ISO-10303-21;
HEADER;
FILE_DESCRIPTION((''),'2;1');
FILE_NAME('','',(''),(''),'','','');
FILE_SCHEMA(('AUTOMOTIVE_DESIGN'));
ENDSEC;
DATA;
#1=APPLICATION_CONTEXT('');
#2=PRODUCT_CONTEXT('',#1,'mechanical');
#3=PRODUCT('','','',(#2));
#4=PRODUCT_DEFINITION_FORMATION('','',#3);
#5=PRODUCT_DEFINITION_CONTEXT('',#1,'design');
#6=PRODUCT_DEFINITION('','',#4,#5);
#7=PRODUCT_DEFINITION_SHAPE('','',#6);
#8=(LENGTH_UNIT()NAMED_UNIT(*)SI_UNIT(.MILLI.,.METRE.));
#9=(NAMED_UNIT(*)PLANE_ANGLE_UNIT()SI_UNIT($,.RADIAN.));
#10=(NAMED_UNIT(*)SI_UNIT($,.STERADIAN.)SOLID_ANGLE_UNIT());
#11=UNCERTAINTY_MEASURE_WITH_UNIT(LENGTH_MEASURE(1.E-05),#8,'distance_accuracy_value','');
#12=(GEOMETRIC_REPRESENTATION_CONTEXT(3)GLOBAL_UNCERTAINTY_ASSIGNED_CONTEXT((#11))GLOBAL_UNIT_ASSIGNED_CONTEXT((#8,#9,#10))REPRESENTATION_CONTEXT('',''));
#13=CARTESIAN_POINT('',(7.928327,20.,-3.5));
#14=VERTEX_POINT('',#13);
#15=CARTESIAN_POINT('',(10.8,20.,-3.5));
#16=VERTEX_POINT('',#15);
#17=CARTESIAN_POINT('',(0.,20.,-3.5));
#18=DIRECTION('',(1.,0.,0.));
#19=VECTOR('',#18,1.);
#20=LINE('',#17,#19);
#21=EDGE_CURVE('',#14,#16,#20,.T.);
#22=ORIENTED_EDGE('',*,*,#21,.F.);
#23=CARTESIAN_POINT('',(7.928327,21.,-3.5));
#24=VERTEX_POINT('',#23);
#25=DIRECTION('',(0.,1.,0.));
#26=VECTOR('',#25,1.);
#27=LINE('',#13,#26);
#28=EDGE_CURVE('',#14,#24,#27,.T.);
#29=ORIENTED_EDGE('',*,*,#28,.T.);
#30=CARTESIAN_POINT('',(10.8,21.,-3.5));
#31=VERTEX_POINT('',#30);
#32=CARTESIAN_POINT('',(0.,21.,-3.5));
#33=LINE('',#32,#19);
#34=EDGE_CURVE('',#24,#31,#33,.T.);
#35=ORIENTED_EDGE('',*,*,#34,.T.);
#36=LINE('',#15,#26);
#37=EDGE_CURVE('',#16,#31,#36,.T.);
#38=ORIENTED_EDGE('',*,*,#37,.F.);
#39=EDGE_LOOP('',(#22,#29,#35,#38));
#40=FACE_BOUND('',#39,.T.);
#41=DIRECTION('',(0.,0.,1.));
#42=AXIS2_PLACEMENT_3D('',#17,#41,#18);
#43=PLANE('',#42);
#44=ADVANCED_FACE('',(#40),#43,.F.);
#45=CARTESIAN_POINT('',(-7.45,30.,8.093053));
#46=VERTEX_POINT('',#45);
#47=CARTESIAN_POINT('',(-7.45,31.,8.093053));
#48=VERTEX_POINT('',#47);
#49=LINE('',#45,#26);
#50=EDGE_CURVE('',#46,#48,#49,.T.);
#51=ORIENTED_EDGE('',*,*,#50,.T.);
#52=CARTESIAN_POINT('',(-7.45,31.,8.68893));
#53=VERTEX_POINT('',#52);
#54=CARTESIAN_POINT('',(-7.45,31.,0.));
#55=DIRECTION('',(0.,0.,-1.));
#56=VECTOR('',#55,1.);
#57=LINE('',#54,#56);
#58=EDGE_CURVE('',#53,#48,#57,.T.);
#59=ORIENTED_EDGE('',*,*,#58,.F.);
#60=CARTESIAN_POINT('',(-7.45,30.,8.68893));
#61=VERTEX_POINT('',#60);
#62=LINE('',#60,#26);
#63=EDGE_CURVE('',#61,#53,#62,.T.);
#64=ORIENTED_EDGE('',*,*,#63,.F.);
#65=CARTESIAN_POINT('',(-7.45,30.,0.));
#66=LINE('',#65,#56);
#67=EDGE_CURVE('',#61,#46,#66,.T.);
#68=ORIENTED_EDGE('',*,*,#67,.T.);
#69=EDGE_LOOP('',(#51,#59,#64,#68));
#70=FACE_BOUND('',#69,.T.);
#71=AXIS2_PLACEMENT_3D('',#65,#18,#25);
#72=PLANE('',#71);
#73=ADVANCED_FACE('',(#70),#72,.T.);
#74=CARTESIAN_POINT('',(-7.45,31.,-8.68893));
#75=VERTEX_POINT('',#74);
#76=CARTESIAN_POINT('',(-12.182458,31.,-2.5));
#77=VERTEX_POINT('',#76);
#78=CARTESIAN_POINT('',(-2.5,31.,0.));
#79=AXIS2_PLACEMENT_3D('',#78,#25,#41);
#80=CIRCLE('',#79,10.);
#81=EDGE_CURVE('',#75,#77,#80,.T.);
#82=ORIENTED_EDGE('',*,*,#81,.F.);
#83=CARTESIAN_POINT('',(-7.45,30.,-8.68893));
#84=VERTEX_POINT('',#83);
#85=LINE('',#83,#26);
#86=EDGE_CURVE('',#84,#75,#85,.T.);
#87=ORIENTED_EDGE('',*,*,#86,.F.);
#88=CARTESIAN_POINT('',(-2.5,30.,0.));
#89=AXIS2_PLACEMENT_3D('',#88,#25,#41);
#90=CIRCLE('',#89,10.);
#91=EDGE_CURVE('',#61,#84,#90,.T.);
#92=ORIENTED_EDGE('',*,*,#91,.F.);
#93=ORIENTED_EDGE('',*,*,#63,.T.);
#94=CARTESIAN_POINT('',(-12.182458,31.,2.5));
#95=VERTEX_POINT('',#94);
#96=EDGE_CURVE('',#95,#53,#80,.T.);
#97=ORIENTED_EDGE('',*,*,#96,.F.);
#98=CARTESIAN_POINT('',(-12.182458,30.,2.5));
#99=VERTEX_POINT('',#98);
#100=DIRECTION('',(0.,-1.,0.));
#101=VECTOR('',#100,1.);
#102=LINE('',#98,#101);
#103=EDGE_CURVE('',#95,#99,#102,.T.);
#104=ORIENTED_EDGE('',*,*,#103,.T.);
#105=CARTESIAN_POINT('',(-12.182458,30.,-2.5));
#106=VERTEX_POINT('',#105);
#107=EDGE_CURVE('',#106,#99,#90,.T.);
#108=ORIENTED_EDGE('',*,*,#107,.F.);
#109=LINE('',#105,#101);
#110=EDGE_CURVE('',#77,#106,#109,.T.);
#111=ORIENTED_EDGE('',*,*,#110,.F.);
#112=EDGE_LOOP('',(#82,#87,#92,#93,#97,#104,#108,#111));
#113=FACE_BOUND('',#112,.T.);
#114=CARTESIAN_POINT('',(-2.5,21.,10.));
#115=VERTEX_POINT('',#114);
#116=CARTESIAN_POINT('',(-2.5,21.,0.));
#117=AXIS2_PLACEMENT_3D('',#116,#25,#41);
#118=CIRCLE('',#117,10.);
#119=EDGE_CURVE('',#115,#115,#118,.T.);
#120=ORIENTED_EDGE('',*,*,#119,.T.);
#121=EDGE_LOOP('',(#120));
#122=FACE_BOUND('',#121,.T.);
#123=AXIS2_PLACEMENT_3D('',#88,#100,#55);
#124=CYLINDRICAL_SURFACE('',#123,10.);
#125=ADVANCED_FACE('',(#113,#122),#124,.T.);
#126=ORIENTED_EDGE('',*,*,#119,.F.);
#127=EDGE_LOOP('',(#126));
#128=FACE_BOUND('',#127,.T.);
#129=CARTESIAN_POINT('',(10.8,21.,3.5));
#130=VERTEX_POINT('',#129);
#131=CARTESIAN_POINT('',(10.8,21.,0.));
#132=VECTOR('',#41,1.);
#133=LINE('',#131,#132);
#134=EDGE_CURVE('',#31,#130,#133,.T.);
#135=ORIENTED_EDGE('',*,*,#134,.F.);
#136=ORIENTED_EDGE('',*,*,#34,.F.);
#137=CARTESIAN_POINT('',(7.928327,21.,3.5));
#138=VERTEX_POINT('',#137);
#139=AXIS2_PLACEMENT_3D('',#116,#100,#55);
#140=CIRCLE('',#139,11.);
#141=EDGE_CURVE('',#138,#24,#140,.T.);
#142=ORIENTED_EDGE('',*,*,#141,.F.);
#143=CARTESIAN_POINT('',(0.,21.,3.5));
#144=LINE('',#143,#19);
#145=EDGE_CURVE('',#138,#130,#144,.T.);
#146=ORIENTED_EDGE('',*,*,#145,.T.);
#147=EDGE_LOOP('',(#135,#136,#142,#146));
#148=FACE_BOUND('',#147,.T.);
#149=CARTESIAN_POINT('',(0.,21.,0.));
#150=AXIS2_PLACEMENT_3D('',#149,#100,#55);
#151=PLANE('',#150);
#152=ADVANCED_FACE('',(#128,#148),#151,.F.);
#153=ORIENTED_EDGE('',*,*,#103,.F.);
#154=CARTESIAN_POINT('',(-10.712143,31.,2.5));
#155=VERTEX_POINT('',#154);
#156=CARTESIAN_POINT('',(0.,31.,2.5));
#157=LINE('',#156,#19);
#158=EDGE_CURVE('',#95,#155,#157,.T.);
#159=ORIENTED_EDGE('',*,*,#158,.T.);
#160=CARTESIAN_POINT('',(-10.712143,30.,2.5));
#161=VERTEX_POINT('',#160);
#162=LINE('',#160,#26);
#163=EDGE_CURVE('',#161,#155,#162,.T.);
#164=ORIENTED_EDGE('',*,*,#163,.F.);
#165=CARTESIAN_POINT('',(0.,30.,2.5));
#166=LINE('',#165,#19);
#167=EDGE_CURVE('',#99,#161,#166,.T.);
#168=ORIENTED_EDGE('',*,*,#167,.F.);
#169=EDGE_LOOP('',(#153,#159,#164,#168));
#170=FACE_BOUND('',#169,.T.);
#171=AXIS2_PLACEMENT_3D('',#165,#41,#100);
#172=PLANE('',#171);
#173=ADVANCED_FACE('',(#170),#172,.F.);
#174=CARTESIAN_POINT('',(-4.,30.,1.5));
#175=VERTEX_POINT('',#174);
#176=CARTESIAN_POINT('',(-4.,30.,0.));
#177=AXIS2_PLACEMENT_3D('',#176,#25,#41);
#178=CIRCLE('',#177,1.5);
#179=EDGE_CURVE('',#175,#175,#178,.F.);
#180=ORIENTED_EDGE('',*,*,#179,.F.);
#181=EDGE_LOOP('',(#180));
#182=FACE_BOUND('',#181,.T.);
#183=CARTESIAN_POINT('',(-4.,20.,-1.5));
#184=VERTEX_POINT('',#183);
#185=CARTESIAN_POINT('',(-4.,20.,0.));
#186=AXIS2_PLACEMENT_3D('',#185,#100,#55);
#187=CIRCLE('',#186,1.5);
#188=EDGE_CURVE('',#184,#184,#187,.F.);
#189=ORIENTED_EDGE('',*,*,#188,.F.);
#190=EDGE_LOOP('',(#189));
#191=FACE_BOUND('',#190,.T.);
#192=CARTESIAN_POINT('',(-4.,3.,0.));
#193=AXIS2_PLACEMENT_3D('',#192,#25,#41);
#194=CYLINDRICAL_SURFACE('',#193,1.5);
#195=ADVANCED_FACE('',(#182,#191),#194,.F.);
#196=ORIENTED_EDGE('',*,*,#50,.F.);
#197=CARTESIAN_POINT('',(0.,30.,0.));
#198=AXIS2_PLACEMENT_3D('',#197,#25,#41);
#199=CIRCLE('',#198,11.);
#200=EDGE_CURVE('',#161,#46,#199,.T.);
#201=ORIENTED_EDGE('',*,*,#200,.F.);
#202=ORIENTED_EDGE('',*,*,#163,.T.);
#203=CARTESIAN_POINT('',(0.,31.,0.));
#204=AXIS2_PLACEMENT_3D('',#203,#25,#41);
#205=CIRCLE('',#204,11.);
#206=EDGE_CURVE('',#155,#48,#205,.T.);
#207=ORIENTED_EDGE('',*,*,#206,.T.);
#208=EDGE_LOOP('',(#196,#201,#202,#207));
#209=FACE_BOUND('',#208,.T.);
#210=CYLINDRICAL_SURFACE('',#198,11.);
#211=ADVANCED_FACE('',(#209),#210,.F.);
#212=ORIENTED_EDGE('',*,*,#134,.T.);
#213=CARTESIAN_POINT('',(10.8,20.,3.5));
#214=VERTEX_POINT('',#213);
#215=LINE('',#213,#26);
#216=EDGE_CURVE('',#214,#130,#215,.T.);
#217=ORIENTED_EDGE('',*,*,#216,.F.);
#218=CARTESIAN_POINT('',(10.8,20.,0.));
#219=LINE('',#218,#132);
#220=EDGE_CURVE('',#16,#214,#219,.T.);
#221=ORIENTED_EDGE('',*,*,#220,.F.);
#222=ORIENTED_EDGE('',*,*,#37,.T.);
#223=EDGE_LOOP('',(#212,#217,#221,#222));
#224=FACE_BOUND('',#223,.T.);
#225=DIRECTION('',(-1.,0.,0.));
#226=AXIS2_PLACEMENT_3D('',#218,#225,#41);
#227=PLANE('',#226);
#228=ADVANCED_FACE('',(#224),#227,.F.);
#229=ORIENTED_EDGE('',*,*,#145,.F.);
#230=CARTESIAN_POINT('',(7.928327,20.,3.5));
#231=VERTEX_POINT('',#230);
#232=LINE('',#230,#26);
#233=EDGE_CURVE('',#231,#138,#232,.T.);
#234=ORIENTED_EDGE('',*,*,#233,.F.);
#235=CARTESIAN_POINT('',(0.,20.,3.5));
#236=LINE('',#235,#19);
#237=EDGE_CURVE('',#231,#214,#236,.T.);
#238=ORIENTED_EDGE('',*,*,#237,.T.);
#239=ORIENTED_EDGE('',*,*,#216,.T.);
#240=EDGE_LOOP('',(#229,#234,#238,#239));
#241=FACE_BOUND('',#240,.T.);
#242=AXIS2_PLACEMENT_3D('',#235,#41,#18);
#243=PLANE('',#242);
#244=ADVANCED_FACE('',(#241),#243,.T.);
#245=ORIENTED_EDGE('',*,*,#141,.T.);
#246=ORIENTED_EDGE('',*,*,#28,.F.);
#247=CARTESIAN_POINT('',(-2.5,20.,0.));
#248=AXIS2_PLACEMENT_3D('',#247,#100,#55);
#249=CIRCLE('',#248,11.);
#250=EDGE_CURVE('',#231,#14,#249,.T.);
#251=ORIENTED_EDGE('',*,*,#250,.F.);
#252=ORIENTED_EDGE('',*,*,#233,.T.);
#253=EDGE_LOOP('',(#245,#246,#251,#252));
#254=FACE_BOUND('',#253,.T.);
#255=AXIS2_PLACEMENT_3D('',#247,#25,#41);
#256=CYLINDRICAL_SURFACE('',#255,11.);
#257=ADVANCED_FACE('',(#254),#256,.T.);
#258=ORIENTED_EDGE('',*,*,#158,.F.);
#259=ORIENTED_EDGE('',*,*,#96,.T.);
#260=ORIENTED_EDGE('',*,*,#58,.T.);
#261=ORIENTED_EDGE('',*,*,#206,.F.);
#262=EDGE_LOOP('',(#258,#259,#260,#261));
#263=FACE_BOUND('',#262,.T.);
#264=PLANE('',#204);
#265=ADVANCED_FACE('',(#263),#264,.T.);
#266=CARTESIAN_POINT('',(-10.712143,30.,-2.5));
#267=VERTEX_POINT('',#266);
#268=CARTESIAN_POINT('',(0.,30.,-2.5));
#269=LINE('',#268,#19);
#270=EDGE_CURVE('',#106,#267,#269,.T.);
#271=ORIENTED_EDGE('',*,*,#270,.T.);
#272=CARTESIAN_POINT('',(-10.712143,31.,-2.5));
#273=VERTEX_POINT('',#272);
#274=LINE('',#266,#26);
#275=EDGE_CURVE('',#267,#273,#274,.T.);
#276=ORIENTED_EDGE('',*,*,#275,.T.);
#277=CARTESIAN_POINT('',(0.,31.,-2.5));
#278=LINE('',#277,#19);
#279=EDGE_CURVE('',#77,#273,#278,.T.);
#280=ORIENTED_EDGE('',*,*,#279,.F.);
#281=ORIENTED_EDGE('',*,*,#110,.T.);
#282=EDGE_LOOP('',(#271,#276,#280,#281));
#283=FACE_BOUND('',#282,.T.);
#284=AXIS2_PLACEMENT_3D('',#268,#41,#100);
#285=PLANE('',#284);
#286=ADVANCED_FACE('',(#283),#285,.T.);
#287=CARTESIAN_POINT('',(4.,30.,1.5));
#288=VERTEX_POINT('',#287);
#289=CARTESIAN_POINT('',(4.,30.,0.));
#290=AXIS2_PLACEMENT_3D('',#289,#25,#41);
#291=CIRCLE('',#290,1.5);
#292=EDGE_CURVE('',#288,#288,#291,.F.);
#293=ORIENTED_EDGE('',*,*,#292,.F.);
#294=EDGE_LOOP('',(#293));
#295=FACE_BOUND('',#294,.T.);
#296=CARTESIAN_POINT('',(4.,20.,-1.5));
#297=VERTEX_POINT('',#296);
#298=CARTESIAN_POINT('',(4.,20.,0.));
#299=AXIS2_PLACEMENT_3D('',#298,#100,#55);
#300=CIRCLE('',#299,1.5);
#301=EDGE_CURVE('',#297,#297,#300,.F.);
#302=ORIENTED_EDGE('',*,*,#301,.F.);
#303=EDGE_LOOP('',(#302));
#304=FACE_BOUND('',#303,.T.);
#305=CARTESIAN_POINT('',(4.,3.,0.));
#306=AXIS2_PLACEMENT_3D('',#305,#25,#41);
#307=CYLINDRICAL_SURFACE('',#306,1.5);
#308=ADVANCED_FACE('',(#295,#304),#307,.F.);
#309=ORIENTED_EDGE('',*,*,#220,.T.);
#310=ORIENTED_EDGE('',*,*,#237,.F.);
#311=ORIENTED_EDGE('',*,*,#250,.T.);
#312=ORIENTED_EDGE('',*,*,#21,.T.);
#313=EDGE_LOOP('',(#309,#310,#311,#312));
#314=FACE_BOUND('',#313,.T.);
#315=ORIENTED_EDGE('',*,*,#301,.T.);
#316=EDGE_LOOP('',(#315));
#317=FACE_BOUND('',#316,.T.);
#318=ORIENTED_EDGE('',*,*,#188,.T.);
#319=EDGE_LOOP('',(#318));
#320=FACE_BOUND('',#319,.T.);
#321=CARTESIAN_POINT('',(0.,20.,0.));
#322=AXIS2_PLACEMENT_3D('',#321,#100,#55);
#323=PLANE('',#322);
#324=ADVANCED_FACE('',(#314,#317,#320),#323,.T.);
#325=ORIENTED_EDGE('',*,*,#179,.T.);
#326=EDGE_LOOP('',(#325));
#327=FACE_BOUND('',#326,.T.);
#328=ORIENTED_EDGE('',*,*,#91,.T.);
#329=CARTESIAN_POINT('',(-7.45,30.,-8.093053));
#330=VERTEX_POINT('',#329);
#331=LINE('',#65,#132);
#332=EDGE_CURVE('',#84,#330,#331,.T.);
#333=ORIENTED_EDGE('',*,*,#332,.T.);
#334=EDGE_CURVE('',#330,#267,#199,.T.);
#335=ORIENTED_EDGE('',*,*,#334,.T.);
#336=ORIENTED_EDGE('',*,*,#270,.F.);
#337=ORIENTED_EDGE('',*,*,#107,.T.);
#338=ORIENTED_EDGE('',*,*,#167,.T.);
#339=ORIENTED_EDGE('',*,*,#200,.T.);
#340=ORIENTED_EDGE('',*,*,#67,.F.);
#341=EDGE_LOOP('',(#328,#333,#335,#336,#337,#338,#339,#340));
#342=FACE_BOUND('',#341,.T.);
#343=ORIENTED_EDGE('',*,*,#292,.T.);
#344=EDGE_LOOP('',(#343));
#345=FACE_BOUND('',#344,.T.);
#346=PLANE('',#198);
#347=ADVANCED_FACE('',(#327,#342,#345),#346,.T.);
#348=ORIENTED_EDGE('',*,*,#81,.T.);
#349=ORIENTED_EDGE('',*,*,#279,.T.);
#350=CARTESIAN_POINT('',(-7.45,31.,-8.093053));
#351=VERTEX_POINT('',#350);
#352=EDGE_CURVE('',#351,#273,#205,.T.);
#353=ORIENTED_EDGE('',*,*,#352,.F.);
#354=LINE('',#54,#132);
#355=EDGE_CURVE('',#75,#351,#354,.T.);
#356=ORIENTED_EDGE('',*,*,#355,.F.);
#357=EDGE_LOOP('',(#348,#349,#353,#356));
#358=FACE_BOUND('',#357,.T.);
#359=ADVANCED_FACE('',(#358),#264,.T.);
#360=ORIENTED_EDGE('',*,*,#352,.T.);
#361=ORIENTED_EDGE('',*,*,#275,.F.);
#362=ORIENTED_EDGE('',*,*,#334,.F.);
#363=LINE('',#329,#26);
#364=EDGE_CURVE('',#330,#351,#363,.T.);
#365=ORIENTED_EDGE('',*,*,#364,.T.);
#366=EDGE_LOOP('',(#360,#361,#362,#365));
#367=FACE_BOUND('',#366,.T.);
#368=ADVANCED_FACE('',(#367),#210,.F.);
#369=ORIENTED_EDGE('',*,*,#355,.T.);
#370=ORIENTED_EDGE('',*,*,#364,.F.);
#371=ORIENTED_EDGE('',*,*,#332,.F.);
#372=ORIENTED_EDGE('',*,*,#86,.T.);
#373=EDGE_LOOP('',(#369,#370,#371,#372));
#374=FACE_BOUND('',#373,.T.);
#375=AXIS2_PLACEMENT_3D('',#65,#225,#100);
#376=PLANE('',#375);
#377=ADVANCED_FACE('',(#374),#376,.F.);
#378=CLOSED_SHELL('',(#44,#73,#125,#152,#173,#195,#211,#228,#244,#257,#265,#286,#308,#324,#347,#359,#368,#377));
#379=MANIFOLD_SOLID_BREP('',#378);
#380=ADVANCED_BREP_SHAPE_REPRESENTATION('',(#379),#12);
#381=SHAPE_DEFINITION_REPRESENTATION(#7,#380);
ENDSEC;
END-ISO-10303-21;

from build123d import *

# Parameters (mm, degrees)
STOCK_ECCENTRIC_START               = 21
STOCK_ECCENTRIC_SHAFT_1_OUTLINE_R   = 10
STOCK_ECCENTRIC_SHAFT_1_OUTLINE_R_2 = 1.5
STOCK_ECCENTRIC_SHAFT_1_DEPTH       = 9
STOCK_ECCENTRIC_START_2             = 30
STOCK_ECCENTRIC_SHAFT_1_2_DEPTH     = 1
BOSS_EXTRUDE1_START                 = 1
SKETCH1_R                           = 10
SKETCH1_R_2                         = 1.5
BOSS_EXTRUDE1_DEPTH                 = 1
CUT_EXTRUDE1_START                  = -1
CUT_EXTRUDE1_DEPTH                  = 1


# Read off the part's stored shape, not the designer's step: Stock-Eccentric Shaft-1
with BuildPart() as part:
    # Stock-Eccentric Shaft-1 outline → Stock-Eccentric Shaft-1 (new body)
    with BuildSketch(Plane(origin=(0, 0, 0), x_dir=(1, 0, 0), z_dir=(0, 1, 0)).offset(STOCK_ECCENTRIC_START)):
        with Locations((-2.5, 0)):
            Circle(STOCK_ECCENTRIC_SHAFT_1_OUTLINE_R)
        with Locations((-4, 0)):
            Circle(STOCK_ECCENTRIC_SHAFT_1_OUTLINE_R_2, mode=Mode.SUBTRACT)
        with Locations((4, 0)):
            Circle(STOCK_ECCENTRIC_SHAFT_1_OUTLINE_R_2, mode=Mode.SUBTRACT)
    extrude(amount=STOCK_ECCENTRIC_SHAFT_1_DEPTH)

    # Stock-Eccentric Shaft-1 2 outline → Stock-Eccentric Shaft-1 2 (add)
    with BuildSketch(Plane(origin=(0, 0, 0), x_dir=(1, 0, 0), z_dir=(0, 1, 0)).offset(STOCK_ECCENTRIC_START_2)):
        with BuildLine():
            ThreePointArc((-10.712142643, 2.5), (-8.817418729, 6.576710953), (-5.45, 9.554972527))
            ThreePointArc((-5.45, 9.554972527), (-9.734494483, 6.903773575), (-12.182458366, 2.5))
            Line((-12.182458366, 2.5), (-10.712142643, 2.5))
        make_face()
        with BuildLine():
            ThreePointArc((-12.182458366, -2.5), (-9.734494483, -6.903773575), (-5.45, -9.554972527))
            ThreePointArc((-5.45, -9.554972527), (-8.817418729, -6.576710953), (-10.712142643, -2.5))
            Line((-10.712142643, -2.5), (-12.182458366, -2.5))
        make_face()
    extrude(amount=STOCK_ECCENTRIC_SHAFT_1_2_DEPTH)

    # Sketch1 → Boss-Extrude1 (add)
    # profile 1 of 4: a face of its own
    with BuildSketch(Plane.XZ.offset(-21).offset(BOSS_EXTRUDE1_START)):
        with BuildLine():
            Line((7.928326807, -3.5), (7.8, -3.5))
            Line((7.8, -3.5), (7.8, 3.5))
            Line((7.8, 3.5), (7.928326807, 3.5))
            ThreePointArc((7.928326807, 3.5), (-13.5, 0), (7.928326807, -3.5))
        make_face()
        with Locations(Location((-2.5, 0, 0), (0, 0, 252.842462628))):
            Circle(SKETCH1_R, mode=Mode.SUBTRACT)
    # profile 2 of 4: a face of its own
    with BuildSketch(Plane.XZ.offset(-21).offset(BOSS_EXTRUDE1_START)):
        with Locations(Location((-2.5, 0, 0), (0, 0, 252.842462628))):
            Circle(SKETCH1_R)
        with Locations(Location((4, 0, 0), (0, 0, 90))):
            Circle(SKETCH1_R_2, mode=Mode.SUBTRACT)
        with Locations(Location((-4, 0, 0), (0, 0, 90))):
            Circle(SKETCH1_R_2, mode=Mode.SUBTRACT)
    # profile 3 of 4: a face of its own
    with BuildSketch(Plane.XZ.offset(-21).offset(BOSS_EXTRUDE1_START)):
        with BuildLine():
            Line((7.8, 3.5), (7.8, -3.5))
            Line((7.8, -3.5), (7.928326807, -3.5))
            ThreePointArc((7.928326807, -3.5), (8.356141001, -1.773189939), (8.5, 0))
            ThreePointArc((8.5, 0), (8.356141001, 1.773189939), (7.928326807, 3.5))
            Line((7.928326807, 3.5), (7.8, 3.5))
        make_face()
    # profile 4 of 4: a face of its own
    with BuildSketch(Plane.XZ.offset(-21).offset(BOSS_EXTRUDE1_START)):
        with BuildLine():
            ThreePointArc((8.5, 0), (8.356141001, -1.773189939), (7.928326807, -3.5))
            Line((7.928326807, -3.5), (10.8, -3.5))
            Line((10.8, -3.5), (10.8, 3.5))
            Line((10.8, 3.5), (7.928326807, 3.5))
            ThreePointArc((7.928326807, 3.5), (8.356141001, 1.773189939), (8.5, 0))
        make_face()
    extrude(amount=-BOSS_EXTRUDE1_DEPTH)

    # Sketch2 → Cut-Extrude1 (cut)
    with BuildSketch(Plane(origin=(0, 31, 0), x_dir=(1, 0, 0), z_dir=(0, 1, 0)).offset(CUT_EXTRUDE1_START)):
        with BuildLine():
            ThreePointArc((-5.45, 9.554972527), (-6.473664245, 9.176600268), (-7.45, 8.688929738))
            Line((-7.45, 8.688929738), (-7.45, 8.093052576))
            ThreePointArc((-7.45, 8.093052576), (-6.491286659, 8.880495342), (-5.45, 9.554972527))
        make_face()
        with BuildLine():
            ThreePointArc((-5.45, -9.554972527), (-6.491286659, -8.880495342), (-7.45, -8.093052576))
            Line((-7.45, -8.093052576), (-7.45, -8.688929738))
            ThreePointArc((-7.45, -8.688929738), (-6.473664245, -9.176600268), (-5.45, -9.554972527))
        make_face()
    extrude(amount=CUT_EXTRUDE1_DEPTH, mode=Mode.SUBTRACT)


solid = part.part
